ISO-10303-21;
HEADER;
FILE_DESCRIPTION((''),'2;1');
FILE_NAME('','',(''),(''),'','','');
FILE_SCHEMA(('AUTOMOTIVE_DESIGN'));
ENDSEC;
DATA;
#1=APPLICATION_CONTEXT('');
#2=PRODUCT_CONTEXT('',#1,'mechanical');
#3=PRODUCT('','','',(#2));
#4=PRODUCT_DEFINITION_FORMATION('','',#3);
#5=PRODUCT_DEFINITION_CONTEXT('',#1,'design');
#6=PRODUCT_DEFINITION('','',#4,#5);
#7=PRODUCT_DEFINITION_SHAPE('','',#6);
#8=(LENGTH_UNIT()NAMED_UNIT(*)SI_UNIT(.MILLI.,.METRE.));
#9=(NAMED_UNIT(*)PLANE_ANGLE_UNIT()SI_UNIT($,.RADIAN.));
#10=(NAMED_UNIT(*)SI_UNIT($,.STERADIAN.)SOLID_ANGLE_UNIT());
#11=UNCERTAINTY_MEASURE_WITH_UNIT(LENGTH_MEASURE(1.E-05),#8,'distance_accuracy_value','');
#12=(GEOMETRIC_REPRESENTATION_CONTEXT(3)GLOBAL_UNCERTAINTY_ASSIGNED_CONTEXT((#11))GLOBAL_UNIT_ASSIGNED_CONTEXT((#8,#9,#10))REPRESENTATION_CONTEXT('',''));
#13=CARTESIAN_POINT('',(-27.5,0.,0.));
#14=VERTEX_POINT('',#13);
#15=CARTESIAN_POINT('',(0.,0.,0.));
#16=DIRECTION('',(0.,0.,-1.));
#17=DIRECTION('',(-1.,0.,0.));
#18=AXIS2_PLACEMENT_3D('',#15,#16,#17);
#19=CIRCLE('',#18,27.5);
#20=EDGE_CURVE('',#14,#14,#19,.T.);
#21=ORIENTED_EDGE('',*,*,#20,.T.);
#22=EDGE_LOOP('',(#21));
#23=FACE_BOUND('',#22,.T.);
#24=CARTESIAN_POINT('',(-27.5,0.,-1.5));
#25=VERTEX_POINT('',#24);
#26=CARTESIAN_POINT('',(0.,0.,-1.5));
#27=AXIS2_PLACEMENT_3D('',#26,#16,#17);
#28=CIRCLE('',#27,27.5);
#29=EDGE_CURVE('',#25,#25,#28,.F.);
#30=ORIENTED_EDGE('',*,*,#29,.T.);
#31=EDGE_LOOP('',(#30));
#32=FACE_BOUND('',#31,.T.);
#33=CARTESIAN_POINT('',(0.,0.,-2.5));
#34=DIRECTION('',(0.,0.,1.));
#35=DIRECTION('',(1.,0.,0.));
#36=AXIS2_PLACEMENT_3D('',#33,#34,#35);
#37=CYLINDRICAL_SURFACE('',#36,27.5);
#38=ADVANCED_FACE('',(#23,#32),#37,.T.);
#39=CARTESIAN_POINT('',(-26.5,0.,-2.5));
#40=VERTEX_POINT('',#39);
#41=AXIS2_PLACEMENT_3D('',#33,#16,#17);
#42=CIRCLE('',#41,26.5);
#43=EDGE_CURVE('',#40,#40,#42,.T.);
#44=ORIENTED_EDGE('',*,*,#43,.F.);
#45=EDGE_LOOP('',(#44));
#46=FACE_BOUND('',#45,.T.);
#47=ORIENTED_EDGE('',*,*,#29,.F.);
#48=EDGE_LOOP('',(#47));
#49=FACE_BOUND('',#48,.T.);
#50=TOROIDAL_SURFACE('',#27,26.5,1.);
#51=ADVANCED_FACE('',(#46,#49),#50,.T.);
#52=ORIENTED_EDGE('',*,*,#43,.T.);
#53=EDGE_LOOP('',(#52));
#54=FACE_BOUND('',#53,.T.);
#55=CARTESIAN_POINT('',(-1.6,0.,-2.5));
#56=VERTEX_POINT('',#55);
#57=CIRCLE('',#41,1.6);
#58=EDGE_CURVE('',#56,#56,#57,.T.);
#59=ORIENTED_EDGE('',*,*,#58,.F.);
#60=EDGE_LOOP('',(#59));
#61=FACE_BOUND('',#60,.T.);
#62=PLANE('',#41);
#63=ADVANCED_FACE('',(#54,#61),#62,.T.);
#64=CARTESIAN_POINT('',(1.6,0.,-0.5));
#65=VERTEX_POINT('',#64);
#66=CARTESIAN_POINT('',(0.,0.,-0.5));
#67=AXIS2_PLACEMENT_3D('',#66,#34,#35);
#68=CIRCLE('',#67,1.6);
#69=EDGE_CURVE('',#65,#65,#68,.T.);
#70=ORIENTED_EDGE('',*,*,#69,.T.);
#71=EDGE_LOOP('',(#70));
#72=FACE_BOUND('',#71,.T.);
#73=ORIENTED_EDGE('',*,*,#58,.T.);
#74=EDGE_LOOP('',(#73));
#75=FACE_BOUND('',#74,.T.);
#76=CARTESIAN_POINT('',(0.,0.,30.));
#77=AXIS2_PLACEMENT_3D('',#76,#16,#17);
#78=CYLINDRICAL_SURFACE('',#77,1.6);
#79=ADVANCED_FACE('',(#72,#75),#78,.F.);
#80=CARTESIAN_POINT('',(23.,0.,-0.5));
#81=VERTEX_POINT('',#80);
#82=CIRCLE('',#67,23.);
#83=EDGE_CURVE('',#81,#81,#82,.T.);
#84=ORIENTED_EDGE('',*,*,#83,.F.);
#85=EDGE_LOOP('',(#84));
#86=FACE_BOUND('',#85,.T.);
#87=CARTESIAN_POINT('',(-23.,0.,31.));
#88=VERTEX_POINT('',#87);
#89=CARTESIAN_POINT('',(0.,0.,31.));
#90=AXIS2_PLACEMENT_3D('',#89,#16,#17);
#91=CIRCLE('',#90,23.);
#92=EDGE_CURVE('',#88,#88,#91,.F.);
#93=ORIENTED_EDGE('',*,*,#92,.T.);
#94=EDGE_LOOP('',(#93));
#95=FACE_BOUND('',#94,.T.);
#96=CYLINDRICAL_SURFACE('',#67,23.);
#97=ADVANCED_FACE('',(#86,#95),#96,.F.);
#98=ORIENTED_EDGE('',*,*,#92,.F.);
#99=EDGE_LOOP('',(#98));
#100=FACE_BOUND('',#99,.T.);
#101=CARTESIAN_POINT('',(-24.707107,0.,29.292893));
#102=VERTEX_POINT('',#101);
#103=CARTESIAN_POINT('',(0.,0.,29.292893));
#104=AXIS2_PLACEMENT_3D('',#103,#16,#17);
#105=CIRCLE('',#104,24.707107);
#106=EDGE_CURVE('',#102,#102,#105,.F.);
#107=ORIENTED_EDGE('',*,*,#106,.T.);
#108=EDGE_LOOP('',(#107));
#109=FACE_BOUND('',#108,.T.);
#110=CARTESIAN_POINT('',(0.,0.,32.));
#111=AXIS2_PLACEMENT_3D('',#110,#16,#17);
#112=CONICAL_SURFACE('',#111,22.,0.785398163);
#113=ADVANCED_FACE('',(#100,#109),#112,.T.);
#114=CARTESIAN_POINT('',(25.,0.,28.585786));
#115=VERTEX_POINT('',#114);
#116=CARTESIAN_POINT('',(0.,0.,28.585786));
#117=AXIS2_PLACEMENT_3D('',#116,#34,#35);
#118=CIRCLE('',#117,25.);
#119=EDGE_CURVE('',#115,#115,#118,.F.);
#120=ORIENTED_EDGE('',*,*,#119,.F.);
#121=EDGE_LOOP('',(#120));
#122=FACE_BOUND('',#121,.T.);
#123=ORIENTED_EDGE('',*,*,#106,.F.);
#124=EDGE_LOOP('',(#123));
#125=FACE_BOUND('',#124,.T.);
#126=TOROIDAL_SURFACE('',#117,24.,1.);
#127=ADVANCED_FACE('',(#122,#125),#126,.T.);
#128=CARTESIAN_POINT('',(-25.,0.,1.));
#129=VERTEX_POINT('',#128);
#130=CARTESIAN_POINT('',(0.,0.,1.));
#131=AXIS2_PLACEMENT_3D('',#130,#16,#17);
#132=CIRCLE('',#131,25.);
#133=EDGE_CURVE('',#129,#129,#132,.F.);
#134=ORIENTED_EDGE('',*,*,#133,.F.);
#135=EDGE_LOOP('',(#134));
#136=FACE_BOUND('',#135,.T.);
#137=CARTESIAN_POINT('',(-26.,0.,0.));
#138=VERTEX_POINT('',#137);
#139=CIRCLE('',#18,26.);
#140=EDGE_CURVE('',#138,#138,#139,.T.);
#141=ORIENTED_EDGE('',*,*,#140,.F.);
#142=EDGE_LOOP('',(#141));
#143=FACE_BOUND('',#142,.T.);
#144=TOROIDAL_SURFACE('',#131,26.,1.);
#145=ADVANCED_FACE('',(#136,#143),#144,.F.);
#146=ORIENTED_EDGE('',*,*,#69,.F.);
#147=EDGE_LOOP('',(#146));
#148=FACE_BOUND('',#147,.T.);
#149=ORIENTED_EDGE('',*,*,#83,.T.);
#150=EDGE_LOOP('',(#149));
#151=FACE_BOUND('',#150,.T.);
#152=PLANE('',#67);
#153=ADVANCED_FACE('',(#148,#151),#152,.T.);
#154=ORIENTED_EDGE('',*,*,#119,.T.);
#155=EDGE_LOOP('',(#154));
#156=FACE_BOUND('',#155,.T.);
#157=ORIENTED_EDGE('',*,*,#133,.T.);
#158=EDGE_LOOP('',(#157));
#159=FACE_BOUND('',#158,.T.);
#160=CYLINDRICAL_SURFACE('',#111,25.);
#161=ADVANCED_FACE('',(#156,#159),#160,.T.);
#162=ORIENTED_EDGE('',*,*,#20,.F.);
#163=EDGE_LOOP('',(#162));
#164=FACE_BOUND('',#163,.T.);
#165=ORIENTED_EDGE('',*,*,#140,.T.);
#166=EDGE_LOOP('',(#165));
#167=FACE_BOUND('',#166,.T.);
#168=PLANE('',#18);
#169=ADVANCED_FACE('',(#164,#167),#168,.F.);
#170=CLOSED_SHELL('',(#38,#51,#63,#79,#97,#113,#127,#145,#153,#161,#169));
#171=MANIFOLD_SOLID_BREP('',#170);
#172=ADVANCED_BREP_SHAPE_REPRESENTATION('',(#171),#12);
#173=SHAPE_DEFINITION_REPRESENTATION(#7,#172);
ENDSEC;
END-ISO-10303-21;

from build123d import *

# Parameters (mm, degrees)
SKETCH_1_R          = 25
EXTRUDE_1_DEPTH     = 32
SKETCH_2_R          = 27.5
EXTRUDE_2_DEPTH     = 2.5
SKETCH_3_R          = 23
CUT_EXTRUDE_1_DEPTH = 32.5
CHAMFER_1_SIZE      = 3
FILLET_1_R          = 1
FILLET_2_R          = 1
FILLET_3_R          = 1
SKETCH_4_R          = 1.6
CUT_EXTRUDE_2_DEPTH = 32.5


with BuildPart() as part:
    # Эскиз1 → Бобышка-Вытянуть1 (new body)
    with BuildSketch(Plane.XY):
        Circle(SKETCH_1_R)
    extrude(amount=EXTRUDE_1_DEPTH)

    # Эскиз2 → Бобышка-Вытянуть2 (add)
    with BuildSketch(Plane(origin=(0, 0, 0), x_dir=(-1, 0, 0), z_dir=(0, 0, -1))):
        Circle(SKETCH_2_R)
    extrude(amount=EXTRUDE_2_DEPTH)

    # Эскиз3 → Вырез-Вытянуть1 (cut)
    with BuildSketch(Plane.XY.offset(32)):
        Circle(SKETCH_3_R)
    extrude(amount=-CUT_EXTRUDE_1_DEPTH, mode=Mode.SUBTRACT)

    # Фаска1
    # the kernel refuses this chamfer: 3 mm, written as the material it takes off along each edge
    with BuildSketch(Plane(origin=(0, 0, 32), x_dir=(1, 0, 0), z_dir=(0, -1, 0))) as chamfer_1_piece_1:
        Polygon((25, -CHAMFER_1_SIZE), (25 - CHAMFER_1_SIZE, 0), (25, 0), align=None)
    revolve(axis=Axis((0, 0, 32), (0, 0, 1)), mode=Mode.SUBTRACT)

    # Скругление1
    fillet_1_edges = [part.edges().sort_by_distance(p)[0] for p in [
        (-25, 0, 29),
    ]]
    fillet(fillet_1_edges, radius=FILLET_1_R)

    # Скругление2
    fillet_2_edges = [part.edges().sort_by_distance(p)[0] for p in [
        (-25, 0, 0),
    ]]
    fillet(fillet_2_edges, radius=FILLET_2_R)

    # Скругление3
    fillet_3_edges = [part.edges().sort_by_distance(p)[0] for p in [
        (27.5, 0, -2.5),
    ]]
    fillet(fillet_3_edges, radius=FILLET_3_R)

    # Эскиз4 → Вырез-Вытянуть2 (cut)
    with BuildSketch(Plane(origin=(0, 0, -2.5), x_dir=(-1, 0, 0), z_dir=(0, 0, -1))):
        Circle(SKETCH_4_R)
    extrude(amount=-CUT_EXTRUDE_2_DEPTH, mode=Mode.SUBTRACT)


solid = part.part
